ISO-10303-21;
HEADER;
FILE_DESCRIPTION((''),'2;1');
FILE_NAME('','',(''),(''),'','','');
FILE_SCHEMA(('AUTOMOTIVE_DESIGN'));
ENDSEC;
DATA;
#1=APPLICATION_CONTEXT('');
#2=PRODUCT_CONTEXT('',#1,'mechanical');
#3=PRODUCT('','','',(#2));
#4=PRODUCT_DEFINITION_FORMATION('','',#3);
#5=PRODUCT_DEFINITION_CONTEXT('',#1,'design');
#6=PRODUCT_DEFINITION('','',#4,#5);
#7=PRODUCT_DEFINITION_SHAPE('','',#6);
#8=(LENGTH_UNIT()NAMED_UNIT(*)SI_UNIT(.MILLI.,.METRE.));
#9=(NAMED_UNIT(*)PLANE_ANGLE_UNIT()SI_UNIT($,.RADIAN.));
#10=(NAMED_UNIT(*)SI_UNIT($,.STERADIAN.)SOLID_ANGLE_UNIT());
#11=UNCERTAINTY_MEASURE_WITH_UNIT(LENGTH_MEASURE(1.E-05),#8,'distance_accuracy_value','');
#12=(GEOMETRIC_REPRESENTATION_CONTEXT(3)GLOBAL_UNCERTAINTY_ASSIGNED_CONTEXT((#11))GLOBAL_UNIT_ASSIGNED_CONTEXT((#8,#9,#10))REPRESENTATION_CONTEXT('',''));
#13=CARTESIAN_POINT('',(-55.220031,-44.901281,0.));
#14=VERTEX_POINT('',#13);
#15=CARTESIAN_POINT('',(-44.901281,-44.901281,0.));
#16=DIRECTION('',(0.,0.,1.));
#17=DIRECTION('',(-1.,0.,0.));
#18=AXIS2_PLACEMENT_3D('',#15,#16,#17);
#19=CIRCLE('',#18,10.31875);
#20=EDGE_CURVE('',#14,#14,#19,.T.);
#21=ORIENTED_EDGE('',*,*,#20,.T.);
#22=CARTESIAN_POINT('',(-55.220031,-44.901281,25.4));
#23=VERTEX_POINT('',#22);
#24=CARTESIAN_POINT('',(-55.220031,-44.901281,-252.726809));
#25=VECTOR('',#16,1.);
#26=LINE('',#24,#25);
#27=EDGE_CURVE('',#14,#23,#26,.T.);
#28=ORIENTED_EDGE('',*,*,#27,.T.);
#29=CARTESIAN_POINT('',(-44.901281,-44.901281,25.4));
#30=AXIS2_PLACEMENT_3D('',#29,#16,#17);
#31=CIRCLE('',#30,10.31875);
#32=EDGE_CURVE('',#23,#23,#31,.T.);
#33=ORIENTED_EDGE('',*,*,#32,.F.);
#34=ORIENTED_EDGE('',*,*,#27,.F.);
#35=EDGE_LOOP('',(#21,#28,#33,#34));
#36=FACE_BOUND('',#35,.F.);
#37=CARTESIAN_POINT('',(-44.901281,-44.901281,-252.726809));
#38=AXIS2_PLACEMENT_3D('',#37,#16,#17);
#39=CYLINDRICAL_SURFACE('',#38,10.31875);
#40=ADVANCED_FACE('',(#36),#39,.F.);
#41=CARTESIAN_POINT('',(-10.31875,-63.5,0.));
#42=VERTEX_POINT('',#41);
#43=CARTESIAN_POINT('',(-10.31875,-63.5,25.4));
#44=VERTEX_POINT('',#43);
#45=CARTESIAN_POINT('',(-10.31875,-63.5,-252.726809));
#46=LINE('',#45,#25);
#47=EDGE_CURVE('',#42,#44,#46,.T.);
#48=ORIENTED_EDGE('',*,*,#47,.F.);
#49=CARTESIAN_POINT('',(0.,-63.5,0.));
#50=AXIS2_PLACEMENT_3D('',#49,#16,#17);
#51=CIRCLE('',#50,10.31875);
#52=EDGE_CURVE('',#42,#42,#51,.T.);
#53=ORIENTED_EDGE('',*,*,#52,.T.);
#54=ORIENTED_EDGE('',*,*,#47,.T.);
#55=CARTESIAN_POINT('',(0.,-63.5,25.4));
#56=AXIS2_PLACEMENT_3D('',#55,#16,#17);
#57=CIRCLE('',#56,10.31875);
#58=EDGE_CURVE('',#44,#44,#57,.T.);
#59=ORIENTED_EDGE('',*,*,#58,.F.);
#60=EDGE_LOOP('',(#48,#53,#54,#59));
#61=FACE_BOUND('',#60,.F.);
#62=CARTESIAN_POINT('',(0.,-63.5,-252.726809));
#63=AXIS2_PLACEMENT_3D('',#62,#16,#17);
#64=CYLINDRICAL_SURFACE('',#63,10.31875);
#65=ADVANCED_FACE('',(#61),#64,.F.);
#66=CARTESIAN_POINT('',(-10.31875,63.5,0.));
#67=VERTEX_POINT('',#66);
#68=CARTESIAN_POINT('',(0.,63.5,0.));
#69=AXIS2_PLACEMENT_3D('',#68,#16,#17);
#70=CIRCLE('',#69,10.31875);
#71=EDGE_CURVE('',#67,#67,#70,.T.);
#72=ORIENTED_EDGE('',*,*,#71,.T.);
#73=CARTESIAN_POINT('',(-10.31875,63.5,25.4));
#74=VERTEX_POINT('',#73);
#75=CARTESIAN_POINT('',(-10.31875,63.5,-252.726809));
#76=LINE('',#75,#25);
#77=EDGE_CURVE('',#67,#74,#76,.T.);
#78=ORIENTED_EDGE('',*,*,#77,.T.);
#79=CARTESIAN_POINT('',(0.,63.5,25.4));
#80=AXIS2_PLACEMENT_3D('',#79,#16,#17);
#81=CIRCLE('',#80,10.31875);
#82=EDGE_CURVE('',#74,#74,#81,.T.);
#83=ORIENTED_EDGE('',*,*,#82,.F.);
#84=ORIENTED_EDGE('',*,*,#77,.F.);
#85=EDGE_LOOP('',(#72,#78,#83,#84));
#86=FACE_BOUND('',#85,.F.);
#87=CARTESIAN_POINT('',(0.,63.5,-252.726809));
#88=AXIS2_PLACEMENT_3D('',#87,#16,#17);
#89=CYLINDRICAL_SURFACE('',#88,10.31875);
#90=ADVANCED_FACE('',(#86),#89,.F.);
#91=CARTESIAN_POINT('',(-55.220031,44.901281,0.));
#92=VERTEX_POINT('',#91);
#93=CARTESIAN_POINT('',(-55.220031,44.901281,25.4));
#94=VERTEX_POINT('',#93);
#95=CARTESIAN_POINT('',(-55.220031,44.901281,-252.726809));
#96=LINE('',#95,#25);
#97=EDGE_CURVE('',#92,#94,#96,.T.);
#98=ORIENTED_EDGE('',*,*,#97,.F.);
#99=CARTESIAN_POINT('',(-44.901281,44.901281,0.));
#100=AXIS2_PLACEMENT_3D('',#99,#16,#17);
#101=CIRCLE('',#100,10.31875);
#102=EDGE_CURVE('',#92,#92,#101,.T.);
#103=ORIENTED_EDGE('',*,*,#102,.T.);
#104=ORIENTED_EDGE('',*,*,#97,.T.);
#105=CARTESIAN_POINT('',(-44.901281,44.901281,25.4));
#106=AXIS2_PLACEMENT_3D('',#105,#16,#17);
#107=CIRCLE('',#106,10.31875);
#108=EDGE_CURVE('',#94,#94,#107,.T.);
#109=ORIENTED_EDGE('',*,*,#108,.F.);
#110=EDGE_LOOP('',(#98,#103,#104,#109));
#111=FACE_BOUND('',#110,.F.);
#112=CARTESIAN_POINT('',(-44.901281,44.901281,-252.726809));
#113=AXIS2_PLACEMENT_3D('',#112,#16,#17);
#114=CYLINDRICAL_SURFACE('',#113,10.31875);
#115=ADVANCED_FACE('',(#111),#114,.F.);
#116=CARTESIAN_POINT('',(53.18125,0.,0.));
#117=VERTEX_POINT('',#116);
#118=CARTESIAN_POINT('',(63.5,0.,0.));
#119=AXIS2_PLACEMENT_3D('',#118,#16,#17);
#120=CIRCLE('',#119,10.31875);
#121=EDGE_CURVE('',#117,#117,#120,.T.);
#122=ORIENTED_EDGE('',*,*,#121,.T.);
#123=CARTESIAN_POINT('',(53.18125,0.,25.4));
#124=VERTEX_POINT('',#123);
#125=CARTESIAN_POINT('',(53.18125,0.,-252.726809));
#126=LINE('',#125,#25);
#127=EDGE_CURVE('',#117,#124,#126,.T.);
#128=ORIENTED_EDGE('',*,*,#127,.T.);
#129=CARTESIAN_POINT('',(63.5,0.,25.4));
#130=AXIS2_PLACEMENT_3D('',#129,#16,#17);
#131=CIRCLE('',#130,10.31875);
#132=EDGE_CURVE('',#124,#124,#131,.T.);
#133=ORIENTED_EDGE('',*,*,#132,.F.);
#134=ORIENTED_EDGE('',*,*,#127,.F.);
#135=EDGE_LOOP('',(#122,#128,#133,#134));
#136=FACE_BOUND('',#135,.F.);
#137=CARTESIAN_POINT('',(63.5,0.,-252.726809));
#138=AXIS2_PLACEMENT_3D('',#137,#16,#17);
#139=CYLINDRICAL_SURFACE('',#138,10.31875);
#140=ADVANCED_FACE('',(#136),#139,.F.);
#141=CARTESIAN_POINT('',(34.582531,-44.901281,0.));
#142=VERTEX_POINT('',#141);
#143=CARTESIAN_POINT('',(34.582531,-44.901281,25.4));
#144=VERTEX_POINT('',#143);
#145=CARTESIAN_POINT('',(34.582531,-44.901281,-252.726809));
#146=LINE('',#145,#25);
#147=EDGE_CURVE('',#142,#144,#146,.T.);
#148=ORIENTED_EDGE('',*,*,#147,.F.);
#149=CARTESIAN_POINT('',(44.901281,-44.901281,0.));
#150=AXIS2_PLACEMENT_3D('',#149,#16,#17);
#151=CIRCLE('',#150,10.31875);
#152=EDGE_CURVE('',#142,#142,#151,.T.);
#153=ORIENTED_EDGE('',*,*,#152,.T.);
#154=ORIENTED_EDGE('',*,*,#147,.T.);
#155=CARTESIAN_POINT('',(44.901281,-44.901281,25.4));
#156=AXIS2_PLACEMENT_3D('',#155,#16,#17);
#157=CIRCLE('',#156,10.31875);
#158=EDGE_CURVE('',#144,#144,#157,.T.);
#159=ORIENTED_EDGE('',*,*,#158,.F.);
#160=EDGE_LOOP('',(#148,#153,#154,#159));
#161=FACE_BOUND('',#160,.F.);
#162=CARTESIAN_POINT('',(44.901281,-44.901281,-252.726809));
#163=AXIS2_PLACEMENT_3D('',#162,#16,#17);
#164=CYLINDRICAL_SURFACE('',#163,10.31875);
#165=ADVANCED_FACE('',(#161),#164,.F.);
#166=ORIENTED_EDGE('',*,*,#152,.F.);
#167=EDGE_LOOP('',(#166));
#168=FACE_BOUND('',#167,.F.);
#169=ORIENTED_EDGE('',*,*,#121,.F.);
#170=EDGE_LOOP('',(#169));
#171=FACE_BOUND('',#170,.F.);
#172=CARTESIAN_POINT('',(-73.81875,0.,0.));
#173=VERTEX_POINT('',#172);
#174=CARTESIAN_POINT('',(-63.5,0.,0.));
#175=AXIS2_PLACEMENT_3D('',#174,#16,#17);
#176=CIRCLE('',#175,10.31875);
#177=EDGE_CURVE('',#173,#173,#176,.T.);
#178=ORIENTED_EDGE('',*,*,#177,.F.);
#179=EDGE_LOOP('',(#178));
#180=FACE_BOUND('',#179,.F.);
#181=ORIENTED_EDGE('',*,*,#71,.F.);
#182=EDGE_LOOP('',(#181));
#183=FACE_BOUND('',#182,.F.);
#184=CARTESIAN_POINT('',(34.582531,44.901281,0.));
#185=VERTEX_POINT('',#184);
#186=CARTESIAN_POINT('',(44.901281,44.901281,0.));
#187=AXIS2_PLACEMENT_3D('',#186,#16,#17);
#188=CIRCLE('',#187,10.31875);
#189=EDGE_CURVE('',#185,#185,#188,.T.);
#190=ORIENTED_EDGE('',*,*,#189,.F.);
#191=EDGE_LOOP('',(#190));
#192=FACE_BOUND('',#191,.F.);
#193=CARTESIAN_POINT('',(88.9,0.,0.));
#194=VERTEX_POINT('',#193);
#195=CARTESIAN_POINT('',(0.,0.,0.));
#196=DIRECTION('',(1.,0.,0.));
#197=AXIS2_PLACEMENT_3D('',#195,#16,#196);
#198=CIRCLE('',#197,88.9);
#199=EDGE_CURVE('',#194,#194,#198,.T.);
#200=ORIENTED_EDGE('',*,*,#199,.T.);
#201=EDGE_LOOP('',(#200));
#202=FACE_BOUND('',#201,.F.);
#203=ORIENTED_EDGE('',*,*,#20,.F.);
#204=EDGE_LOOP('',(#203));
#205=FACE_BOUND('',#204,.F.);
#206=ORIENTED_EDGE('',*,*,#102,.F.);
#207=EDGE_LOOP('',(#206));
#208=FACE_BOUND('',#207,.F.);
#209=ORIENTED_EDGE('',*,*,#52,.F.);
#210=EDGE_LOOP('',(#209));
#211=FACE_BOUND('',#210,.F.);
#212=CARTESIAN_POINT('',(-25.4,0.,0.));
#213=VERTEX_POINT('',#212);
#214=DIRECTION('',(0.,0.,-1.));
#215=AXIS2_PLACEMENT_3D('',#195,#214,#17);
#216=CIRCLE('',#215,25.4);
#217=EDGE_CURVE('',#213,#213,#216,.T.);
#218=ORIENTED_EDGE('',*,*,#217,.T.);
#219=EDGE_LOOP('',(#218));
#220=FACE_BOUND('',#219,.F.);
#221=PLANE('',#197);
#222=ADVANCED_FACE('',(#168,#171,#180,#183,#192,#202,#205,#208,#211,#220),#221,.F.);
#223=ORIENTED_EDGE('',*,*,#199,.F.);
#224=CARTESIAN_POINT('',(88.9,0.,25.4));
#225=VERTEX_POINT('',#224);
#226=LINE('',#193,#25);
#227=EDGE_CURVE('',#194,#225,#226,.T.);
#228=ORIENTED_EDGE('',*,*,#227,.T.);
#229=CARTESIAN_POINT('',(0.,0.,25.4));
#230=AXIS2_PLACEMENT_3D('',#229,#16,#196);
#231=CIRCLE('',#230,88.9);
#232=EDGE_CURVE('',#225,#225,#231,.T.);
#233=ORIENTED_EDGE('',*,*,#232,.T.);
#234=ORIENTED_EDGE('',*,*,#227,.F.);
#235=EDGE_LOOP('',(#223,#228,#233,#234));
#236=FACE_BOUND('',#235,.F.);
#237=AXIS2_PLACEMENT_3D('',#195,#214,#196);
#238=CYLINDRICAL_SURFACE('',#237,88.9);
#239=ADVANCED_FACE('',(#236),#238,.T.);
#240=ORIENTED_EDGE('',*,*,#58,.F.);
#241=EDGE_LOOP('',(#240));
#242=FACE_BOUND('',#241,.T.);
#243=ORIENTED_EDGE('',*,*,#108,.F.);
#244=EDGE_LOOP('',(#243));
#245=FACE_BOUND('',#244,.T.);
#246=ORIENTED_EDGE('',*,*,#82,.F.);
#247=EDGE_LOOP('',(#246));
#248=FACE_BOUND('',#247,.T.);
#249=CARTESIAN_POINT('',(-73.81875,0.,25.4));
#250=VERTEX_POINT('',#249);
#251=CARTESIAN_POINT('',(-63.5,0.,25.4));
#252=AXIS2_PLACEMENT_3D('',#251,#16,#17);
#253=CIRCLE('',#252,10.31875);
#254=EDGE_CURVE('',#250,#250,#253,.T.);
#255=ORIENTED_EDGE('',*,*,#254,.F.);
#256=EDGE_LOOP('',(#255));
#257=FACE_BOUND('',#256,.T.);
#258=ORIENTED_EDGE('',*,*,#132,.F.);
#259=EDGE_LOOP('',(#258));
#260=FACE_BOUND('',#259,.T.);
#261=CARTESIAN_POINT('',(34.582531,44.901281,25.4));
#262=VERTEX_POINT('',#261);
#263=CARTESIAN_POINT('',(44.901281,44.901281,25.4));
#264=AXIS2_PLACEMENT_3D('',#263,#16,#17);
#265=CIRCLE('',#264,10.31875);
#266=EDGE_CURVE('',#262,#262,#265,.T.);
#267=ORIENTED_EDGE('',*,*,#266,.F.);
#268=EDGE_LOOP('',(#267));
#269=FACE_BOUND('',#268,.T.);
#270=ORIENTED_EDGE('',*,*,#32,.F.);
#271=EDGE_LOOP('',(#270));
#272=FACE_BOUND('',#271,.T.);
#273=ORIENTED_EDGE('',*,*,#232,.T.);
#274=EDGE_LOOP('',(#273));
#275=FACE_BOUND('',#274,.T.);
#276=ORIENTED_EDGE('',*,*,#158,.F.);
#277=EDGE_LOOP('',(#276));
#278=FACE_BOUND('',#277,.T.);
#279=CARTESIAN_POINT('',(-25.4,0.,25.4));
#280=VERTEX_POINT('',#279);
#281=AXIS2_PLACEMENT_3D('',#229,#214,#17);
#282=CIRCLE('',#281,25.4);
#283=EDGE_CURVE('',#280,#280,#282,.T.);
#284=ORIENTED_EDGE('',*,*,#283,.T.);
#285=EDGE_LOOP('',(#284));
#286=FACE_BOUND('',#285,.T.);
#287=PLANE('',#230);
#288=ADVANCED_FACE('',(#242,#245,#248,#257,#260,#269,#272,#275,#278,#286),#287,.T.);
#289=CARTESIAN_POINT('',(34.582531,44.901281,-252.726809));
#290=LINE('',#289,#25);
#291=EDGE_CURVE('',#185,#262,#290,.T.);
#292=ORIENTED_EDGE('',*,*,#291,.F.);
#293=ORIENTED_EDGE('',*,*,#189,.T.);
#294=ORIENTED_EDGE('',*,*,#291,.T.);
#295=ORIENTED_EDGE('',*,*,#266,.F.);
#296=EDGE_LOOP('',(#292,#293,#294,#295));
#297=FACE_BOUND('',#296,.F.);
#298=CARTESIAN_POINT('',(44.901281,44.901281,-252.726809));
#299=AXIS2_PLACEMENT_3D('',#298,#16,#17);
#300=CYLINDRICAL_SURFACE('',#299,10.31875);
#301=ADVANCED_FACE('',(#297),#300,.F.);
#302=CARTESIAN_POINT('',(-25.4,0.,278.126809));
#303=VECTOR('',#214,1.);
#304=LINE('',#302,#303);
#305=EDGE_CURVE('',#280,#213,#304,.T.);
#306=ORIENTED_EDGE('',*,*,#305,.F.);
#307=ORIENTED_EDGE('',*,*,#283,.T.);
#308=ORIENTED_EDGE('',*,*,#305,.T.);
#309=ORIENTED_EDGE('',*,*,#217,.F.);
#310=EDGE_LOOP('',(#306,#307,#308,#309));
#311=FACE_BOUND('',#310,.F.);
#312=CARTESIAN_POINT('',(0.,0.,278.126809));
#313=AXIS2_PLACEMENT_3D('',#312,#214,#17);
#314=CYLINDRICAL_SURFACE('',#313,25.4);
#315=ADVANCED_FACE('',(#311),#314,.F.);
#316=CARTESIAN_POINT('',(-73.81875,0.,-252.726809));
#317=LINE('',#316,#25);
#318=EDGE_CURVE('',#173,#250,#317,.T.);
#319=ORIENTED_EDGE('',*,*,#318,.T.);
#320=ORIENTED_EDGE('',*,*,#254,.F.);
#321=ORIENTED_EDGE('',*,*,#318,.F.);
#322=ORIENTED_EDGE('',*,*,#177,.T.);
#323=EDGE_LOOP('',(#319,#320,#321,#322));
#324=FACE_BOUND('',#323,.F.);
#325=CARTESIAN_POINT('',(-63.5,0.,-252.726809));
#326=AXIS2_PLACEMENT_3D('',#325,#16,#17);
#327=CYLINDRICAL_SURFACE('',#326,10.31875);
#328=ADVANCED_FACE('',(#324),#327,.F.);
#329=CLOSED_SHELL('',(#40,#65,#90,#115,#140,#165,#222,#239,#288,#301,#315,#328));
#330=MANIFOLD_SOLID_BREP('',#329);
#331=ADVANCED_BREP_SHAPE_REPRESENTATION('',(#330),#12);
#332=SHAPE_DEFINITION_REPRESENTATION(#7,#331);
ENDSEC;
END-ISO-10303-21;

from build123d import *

# Parameters (mm, degrees)
F0_R     = 88.9
F1_DEPTH = 25.4
F2_D     = 20.6375
F4_D     = 50.8


# Not quite as in the source:
# - a feature names something its author has since deleted; it is built from what else it names


with BuildPart() as f1:
    # F0 (on Top) → F1 (new body)
    with BuildSketch(Plane.XY):
        Circle(F0_R)
    extrude(amount=F1_DEPTH)

    # F2 (through all)
    with Locations(Plane(origin=(0, 0, 0), x_dir=(1, 0, 0), z_dir=(0, 0, -1))):
        with Locations((0, -63.5), (-44.9012806053, -44.9012806053), (-63.5, 0), (-44.9012806053, 44.9012806053), (44.9012806053, 44.9012806053), (0, 63.5), (63.5, 0), (44.9012806053, -44.9012806053)):
            Hole(F2_D / 2)

    # F4 (through all)
    with Locations(Plane.XY.offset(25.4)):
        with Locations((0, 0)):
            Hole(F4_D / 2)


solid = f1.part
